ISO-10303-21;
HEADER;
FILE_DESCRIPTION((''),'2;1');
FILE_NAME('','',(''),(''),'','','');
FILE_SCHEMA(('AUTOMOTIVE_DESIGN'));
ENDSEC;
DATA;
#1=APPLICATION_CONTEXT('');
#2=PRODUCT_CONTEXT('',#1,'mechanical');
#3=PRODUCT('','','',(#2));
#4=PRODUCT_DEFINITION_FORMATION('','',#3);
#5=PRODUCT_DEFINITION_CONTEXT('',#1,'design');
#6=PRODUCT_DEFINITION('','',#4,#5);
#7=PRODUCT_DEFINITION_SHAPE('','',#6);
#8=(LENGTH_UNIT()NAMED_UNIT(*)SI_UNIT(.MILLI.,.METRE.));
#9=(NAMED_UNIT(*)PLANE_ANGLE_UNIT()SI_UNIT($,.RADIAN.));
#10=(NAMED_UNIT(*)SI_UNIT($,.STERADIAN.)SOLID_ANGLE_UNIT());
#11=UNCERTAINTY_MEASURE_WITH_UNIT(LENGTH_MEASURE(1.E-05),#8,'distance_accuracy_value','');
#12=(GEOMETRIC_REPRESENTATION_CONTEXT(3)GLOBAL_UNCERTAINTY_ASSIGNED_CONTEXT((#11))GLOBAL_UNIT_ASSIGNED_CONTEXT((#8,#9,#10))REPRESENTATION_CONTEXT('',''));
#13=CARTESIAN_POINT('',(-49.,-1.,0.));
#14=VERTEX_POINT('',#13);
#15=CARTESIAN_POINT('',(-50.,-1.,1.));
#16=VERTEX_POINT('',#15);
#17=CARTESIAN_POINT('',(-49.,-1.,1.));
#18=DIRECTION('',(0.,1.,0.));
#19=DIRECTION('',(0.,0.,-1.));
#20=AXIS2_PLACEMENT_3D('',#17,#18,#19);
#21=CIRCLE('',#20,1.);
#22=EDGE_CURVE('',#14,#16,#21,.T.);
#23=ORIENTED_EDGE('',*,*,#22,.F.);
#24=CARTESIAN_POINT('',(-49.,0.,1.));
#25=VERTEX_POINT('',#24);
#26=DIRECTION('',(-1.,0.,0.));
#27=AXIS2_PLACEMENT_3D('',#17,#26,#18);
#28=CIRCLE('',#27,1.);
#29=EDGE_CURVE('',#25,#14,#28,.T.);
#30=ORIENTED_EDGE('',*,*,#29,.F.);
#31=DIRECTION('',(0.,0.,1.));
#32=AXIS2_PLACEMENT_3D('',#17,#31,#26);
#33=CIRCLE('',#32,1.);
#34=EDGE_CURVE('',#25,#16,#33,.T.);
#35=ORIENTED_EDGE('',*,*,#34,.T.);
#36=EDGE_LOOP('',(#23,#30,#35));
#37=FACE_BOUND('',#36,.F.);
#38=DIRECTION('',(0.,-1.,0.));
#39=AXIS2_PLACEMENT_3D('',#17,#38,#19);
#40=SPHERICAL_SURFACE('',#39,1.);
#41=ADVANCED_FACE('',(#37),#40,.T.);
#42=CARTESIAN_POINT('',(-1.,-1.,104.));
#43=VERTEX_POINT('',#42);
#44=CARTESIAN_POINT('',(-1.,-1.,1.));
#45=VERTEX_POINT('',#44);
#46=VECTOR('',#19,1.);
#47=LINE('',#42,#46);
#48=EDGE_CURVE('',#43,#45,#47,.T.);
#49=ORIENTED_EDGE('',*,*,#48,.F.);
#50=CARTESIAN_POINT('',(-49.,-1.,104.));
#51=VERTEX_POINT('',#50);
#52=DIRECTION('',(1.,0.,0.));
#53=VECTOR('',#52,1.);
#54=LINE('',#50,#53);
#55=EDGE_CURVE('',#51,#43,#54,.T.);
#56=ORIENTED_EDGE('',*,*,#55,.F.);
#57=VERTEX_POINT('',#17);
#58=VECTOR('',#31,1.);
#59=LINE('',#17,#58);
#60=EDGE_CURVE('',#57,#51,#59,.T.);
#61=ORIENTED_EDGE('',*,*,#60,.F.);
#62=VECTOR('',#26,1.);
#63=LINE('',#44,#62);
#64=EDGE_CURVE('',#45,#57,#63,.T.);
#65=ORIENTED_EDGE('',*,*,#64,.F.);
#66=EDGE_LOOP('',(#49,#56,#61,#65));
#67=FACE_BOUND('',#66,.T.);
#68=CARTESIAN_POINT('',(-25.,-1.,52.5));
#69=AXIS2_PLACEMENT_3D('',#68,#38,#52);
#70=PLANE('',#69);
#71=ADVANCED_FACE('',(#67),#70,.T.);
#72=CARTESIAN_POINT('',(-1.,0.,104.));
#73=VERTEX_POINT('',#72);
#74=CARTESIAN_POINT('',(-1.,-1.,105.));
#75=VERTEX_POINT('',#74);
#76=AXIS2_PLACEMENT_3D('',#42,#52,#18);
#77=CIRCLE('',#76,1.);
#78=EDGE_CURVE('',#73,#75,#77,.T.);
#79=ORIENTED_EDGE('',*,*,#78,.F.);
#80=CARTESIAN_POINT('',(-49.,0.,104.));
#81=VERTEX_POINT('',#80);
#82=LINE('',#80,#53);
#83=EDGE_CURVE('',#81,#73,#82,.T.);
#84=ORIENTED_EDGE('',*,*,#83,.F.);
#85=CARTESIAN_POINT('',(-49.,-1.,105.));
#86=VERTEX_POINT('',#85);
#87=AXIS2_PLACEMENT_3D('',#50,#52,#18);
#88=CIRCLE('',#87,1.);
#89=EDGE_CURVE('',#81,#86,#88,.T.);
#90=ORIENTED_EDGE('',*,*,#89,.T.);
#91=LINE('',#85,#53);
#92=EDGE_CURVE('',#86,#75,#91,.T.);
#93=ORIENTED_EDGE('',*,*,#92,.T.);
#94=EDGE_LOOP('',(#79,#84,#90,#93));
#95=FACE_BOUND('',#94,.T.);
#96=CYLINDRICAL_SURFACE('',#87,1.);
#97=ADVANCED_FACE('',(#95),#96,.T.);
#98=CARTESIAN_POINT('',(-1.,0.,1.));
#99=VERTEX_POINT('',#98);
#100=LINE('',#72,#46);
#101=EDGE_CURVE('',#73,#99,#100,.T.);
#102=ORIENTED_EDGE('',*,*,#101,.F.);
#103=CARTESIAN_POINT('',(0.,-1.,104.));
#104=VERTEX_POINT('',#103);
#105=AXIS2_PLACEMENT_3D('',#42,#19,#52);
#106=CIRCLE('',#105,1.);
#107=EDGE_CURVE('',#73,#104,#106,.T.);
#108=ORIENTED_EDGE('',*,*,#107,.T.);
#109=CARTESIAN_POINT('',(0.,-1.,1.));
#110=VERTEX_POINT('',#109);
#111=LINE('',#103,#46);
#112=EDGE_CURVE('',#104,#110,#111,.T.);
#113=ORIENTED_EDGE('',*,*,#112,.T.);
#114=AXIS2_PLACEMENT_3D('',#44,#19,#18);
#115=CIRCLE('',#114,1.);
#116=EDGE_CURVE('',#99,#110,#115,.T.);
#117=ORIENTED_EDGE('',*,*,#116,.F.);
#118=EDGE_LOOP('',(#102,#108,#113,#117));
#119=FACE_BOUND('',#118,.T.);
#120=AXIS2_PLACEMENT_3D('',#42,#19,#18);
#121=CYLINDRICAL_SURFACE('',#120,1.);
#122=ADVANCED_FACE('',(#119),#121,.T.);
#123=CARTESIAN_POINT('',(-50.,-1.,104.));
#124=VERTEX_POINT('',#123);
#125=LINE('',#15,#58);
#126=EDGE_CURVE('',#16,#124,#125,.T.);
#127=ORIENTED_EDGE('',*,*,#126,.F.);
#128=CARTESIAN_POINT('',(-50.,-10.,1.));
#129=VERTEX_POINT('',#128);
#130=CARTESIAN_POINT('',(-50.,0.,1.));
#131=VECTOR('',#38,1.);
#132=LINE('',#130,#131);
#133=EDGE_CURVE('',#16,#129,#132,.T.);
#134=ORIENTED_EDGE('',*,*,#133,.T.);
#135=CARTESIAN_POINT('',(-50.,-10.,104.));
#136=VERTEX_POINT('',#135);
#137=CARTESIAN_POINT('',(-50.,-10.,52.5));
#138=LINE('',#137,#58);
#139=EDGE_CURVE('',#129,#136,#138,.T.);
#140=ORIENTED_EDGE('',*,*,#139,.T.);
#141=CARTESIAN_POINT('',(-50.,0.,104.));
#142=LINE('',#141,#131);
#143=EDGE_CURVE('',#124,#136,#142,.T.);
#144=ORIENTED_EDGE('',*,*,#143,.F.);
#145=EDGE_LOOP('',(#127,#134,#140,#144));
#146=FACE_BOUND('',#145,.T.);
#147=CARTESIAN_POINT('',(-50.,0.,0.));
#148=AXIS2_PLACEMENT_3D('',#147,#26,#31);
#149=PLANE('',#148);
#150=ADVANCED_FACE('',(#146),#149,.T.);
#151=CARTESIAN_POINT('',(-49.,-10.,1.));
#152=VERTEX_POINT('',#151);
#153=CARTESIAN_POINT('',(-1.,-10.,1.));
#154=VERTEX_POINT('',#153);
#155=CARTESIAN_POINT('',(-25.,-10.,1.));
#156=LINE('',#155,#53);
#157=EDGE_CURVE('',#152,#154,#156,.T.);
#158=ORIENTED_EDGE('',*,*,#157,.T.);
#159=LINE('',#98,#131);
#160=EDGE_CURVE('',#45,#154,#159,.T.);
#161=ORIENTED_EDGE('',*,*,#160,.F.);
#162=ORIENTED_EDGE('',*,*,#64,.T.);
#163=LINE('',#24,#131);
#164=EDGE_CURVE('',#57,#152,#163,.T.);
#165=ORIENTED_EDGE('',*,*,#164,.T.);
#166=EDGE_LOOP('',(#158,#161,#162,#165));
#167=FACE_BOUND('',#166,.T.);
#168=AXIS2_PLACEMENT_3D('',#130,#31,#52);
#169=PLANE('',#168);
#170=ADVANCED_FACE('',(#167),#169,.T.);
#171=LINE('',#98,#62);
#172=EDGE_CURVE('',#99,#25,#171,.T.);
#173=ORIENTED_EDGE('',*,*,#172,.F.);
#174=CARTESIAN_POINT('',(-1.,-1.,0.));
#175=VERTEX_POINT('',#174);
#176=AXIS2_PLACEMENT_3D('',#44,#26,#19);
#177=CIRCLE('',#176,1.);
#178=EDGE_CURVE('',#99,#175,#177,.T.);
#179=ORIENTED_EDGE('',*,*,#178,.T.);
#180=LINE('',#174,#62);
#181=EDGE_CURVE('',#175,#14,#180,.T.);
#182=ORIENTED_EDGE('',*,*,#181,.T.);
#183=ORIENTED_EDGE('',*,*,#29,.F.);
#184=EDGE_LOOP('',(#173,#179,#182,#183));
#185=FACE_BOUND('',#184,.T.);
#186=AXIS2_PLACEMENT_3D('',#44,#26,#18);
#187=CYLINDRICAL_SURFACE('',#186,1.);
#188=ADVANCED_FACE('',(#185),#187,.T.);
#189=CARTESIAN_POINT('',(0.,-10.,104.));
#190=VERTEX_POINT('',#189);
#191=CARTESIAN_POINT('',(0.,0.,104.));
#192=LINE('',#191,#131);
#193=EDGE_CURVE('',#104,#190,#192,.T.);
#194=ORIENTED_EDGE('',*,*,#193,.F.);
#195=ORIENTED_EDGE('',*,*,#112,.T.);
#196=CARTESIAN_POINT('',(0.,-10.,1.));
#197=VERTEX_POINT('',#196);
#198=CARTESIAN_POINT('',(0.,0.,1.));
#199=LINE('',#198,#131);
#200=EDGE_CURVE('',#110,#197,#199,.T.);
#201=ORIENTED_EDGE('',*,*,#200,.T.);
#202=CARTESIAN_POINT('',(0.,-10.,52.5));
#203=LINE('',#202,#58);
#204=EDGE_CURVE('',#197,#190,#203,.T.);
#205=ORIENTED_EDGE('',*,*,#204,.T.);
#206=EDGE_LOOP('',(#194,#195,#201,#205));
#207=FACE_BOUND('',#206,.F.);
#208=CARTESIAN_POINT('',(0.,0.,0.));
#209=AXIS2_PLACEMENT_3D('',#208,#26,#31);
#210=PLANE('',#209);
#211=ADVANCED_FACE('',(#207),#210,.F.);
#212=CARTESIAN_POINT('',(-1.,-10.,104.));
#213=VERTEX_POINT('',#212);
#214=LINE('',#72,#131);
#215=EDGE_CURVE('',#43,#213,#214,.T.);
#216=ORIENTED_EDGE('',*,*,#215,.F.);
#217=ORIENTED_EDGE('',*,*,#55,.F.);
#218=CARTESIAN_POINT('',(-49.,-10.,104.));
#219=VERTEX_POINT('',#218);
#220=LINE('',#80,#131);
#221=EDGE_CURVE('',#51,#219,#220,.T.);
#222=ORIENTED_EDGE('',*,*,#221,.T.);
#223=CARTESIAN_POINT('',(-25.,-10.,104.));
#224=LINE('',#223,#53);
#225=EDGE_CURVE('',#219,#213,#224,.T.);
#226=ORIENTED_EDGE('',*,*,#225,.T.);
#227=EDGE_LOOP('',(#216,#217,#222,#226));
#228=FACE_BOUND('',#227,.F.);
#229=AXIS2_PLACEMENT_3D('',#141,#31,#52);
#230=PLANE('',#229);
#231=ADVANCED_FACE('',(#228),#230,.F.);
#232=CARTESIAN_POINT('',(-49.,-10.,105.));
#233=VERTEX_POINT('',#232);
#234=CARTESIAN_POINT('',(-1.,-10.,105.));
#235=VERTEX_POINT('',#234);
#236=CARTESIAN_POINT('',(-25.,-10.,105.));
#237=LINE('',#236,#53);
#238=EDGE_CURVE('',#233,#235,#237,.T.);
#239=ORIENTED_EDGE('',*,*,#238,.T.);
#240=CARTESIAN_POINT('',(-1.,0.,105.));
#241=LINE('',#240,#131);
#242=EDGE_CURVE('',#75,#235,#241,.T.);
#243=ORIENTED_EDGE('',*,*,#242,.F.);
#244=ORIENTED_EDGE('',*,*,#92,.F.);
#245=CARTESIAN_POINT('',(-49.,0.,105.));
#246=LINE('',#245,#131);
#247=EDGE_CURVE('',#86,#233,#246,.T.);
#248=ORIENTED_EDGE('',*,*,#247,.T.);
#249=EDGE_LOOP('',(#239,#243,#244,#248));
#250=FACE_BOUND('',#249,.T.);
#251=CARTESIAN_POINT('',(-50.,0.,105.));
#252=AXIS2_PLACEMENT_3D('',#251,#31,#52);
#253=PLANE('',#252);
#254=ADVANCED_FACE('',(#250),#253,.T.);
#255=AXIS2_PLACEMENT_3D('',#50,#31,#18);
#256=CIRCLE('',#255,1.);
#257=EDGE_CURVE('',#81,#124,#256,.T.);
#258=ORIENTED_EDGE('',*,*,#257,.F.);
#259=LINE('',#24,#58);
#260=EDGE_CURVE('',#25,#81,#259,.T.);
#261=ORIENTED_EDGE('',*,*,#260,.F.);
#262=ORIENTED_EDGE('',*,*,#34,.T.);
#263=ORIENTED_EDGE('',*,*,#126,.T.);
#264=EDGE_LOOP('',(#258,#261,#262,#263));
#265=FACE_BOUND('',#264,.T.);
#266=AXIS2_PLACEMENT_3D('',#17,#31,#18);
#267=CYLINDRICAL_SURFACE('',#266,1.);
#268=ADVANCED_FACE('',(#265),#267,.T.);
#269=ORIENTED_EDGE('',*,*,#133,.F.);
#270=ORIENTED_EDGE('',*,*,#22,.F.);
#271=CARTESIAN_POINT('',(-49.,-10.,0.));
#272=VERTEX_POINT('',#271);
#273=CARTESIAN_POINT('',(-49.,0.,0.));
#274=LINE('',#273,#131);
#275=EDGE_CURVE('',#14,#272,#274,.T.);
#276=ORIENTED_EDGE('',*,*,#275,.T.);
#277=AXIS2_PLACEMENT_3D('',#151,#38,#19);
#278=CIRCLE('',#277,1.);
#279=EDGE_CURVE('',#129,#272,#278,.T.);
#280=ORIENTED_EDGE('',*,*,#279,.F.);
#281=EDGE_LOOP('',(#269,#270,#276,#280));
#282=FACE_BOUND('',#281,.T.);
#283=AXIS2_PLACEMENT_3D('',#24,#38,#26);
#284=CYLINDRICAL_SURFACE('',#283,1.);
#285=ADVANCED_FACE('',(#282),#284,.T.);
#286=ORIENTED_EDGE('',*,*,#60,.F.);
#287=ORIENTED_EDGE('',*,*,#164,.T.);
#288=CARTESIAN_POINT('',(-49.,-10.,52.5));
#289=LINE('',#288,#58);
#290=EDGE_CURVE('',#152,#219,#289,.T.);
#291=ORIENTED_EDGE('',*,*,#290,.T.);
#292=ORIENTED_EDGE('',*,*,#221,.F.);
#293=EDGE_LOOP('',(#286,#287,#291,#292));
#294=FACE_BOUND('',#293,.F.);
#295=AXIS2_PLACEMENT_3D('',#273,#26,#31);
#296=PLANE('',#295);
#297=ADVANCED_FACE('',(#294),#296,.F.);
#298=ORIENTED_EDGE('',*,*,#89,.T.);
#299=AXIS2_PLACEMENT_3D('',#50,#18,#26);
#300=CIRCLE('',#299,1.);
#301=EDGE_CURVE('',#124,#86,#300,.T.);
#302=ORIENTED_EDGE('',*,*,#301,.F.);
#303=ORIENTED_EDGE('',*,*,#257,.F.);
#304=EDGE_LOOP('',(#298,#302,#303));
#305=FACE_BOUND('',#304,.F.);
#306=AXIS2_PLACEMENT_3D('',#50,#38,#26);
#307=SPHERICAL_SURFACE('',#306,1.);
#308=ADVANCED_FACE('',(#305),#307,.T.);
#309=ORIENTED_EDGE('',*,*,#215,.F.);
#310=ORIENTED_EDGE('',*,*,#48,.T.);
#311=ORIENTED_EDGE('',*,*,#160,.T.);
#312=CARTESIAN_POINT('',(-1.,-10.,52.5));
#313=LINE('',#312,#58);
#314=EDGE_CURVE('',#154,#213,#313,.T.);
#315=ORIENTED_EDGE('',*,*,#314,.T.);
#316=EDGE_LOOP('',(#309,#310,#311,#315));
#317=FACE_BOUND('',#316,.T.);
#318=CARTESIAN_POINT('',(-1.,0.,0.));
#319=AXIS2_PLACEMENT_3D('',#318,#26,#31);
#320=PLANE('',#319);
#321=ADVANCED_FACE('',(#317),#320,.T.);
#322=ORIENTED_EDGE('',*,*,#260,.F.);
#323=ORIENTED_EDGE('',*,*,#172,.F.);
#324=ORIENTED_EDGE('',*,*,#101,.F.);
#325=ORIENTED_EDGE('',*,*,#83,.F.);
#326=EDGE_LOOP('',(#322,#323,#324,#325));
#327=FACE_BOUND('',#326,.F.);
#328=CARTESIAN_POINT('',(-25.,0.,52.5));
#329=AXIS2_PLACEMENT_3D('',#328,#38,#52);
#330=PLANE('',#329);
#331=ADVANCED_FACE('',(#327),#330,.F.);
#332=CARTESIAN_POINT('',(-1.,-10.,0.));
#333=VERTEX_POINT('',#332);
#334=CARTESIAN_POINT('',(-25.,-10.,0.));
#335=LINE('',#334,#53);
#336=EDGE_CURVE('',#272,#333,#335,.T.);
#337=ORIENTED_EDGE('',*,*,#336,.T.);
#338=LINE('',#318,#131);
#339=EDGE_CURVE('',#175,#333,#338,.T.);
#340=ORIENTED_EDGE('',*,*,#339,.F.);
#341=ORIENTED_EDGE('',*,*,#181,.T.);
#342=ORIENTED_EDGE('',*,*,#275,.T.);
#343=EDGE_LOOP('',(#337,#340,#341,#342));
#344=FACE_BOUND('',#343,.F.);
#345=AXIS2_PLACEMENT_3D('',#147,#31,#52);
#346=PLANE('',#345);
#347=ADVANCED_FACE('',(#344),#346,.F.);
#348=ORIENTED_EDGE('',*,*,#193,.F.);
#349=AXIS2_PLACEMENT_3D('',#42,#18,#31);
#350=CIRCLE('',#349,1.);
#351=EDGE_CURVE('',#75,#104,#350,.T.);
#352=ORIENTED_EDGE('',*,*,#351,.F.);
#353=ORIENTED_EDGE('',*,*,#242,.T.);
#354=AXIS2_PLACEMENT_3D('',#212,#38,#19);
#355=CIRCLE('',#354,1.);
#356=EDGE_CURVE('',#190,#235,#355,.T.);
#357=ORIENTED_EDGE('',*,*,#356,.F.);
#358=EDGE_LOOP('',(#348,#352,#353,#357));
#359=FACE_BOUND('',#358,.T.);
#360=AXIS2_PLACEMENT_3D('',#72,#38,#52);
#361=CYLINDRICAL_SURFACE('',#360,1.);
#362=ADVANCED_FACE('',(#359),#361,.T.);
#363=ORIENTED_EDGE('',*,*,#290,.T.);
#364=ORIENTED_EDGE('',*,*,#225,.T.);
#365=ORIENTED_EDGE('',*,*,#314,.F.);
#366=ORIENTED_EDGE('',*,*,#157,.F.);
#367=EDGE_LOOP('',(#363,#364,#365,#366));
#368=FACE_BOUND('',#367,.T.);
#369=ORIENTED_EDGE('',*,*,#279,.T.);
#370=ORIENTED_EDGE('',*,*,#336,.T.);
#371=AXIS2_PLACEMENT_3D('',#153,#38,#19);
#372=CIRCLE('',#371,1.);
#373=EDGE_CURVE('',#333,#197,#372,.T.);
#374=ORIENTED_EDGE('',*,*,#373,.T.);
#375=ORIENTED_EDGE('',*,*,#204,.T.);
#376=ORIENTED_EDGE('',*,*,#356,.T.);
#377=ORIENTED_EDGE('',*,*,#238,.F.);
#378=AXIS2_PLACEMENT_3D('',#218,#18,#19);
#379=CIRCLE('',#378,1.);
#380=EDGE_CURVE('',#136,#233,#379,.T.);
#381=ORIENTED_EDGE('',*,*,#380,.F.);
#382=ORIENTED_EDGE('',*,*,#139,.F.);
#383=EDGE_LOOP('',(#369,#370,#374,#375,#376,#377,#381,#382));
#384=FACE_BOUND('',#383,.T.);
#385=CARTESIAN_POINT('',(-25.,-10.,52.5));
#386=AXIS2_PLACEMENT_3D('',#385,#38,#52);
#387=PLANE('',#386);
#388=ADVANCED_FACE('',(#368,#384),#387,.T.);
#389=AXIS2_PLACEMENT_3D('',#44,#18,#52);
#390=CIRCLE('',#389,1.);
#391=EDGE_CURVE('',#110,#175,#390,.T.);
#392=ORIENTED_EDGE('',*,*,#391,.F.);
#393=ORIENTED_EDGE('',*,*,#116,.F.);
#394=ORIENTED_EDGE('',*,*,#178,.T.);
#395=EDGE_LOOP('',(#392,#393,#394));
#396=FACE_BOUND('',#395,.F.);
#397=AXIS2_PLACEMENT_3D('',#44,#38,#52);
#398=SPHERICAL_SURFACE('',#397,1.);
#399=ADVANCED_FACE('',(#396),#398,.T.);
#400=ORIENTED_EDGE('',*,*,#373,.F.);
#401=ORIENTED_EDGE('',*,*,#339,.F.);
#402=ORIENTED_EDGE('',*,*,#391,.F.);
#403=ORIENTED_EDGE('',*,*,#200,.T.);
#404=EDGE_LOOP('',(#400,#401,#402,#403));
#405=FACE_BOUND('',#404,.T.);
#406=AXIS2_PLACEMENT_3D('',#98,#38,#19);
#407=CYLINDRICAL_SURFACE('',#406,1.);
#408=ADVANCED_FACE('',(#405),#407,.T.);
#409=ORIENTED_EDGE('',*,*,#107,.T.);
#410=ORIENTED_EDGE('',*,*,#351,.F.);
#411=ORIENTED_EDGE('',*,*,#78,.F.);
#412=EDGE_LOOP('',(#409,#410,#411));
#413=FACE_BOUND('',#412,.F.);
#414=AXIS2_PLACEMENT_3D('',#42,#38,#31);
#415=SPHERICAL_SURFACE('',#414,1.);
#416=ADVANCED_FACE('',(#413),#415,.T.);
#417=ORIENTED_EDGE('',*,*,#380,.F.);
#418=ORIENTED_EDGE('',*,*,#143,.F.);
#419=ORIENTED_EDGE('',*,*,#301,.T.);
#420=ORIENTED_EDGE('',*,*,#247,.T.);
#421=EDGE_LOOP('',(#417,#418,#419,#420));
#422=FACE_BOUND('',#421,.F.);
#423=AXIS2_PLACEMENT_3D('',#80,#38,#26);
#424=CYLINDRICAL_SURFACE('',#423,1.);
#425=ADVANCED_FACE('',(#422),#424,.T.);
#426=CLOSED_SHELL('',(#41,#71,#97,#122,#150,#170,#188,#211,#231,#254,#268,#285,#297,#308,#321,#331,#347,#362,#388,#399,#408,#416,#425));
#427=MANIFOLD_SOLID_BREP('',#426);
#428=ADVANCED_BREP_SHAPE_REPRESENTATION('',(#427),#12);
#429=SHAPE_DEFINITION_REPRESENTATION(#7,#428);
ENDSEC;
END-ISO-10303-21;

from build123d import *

# Parameters (mm, degrees)
F0_W     = 50
F0_H     = 105
F1_DEPTH = 10
F2_R     = 1
F3_R     = 1
F4_T     = 1


# Not quite as in the source:
# - a shell that OpenCascade refuses in one call is made with other operations: the cavity is built on its own and cut out


with BuildPart() as f1:
    # F0 (on Front) → F1 (new body)
    with BuildSketch(Plane.XZ):
        with Locations((-25, 52.5)):
            Rectangle(F0_W, F0_H)
    extrude(amount=F1_DEPTH)

    # F2
    f2_edges = [f1.edges().sort_by_distance(p)[0] for p in [
        (-50, -5, 105),
        (0, -5, 105),
        (0, -5, 0),
        (-50, -5, 0),
    ]]
    fillet(f2_edges, radius=F2_R)

    # F3
    f3_edges = [f1.edges().sort_by_distance(p)[0] for p in [
        (-25, 0, 105),
    ]]
    fillet(f3_edges, radius=F3_R)

    # F4: shell of thickness 1, made by hand


with BuildPart() as f4_core1:
    # F4_t2: copy of F1
    add(f1.part)

    # the walls: a layer under each face that stays
    f4_faces = [f4_core1.faces().sort_by_distance(p)[0] for p in [
        (0, -5.5, 52.5),
        (-25, -5.5, 0),
        (-25, 0, 52.5),
        (-25, -5.5, 105),
        (-50, -5.5, 52.5),
    ]]
    thicken(f4_faces, amount=-F4_T, mode=Mode.SUBTRACT)


with BuildPart() as f1_1:
    add(f1.part)

    # what is left inside the walls is the cavity
    f4_cavity = [f4_core1.part.solids().sort_by_distance(p)[0] for p in [
        (-25, -1.01, 35.333333),
    ]]
    add(f4_cavity, mode=Mode.SUBTRACT)


solid = f1_1.part
